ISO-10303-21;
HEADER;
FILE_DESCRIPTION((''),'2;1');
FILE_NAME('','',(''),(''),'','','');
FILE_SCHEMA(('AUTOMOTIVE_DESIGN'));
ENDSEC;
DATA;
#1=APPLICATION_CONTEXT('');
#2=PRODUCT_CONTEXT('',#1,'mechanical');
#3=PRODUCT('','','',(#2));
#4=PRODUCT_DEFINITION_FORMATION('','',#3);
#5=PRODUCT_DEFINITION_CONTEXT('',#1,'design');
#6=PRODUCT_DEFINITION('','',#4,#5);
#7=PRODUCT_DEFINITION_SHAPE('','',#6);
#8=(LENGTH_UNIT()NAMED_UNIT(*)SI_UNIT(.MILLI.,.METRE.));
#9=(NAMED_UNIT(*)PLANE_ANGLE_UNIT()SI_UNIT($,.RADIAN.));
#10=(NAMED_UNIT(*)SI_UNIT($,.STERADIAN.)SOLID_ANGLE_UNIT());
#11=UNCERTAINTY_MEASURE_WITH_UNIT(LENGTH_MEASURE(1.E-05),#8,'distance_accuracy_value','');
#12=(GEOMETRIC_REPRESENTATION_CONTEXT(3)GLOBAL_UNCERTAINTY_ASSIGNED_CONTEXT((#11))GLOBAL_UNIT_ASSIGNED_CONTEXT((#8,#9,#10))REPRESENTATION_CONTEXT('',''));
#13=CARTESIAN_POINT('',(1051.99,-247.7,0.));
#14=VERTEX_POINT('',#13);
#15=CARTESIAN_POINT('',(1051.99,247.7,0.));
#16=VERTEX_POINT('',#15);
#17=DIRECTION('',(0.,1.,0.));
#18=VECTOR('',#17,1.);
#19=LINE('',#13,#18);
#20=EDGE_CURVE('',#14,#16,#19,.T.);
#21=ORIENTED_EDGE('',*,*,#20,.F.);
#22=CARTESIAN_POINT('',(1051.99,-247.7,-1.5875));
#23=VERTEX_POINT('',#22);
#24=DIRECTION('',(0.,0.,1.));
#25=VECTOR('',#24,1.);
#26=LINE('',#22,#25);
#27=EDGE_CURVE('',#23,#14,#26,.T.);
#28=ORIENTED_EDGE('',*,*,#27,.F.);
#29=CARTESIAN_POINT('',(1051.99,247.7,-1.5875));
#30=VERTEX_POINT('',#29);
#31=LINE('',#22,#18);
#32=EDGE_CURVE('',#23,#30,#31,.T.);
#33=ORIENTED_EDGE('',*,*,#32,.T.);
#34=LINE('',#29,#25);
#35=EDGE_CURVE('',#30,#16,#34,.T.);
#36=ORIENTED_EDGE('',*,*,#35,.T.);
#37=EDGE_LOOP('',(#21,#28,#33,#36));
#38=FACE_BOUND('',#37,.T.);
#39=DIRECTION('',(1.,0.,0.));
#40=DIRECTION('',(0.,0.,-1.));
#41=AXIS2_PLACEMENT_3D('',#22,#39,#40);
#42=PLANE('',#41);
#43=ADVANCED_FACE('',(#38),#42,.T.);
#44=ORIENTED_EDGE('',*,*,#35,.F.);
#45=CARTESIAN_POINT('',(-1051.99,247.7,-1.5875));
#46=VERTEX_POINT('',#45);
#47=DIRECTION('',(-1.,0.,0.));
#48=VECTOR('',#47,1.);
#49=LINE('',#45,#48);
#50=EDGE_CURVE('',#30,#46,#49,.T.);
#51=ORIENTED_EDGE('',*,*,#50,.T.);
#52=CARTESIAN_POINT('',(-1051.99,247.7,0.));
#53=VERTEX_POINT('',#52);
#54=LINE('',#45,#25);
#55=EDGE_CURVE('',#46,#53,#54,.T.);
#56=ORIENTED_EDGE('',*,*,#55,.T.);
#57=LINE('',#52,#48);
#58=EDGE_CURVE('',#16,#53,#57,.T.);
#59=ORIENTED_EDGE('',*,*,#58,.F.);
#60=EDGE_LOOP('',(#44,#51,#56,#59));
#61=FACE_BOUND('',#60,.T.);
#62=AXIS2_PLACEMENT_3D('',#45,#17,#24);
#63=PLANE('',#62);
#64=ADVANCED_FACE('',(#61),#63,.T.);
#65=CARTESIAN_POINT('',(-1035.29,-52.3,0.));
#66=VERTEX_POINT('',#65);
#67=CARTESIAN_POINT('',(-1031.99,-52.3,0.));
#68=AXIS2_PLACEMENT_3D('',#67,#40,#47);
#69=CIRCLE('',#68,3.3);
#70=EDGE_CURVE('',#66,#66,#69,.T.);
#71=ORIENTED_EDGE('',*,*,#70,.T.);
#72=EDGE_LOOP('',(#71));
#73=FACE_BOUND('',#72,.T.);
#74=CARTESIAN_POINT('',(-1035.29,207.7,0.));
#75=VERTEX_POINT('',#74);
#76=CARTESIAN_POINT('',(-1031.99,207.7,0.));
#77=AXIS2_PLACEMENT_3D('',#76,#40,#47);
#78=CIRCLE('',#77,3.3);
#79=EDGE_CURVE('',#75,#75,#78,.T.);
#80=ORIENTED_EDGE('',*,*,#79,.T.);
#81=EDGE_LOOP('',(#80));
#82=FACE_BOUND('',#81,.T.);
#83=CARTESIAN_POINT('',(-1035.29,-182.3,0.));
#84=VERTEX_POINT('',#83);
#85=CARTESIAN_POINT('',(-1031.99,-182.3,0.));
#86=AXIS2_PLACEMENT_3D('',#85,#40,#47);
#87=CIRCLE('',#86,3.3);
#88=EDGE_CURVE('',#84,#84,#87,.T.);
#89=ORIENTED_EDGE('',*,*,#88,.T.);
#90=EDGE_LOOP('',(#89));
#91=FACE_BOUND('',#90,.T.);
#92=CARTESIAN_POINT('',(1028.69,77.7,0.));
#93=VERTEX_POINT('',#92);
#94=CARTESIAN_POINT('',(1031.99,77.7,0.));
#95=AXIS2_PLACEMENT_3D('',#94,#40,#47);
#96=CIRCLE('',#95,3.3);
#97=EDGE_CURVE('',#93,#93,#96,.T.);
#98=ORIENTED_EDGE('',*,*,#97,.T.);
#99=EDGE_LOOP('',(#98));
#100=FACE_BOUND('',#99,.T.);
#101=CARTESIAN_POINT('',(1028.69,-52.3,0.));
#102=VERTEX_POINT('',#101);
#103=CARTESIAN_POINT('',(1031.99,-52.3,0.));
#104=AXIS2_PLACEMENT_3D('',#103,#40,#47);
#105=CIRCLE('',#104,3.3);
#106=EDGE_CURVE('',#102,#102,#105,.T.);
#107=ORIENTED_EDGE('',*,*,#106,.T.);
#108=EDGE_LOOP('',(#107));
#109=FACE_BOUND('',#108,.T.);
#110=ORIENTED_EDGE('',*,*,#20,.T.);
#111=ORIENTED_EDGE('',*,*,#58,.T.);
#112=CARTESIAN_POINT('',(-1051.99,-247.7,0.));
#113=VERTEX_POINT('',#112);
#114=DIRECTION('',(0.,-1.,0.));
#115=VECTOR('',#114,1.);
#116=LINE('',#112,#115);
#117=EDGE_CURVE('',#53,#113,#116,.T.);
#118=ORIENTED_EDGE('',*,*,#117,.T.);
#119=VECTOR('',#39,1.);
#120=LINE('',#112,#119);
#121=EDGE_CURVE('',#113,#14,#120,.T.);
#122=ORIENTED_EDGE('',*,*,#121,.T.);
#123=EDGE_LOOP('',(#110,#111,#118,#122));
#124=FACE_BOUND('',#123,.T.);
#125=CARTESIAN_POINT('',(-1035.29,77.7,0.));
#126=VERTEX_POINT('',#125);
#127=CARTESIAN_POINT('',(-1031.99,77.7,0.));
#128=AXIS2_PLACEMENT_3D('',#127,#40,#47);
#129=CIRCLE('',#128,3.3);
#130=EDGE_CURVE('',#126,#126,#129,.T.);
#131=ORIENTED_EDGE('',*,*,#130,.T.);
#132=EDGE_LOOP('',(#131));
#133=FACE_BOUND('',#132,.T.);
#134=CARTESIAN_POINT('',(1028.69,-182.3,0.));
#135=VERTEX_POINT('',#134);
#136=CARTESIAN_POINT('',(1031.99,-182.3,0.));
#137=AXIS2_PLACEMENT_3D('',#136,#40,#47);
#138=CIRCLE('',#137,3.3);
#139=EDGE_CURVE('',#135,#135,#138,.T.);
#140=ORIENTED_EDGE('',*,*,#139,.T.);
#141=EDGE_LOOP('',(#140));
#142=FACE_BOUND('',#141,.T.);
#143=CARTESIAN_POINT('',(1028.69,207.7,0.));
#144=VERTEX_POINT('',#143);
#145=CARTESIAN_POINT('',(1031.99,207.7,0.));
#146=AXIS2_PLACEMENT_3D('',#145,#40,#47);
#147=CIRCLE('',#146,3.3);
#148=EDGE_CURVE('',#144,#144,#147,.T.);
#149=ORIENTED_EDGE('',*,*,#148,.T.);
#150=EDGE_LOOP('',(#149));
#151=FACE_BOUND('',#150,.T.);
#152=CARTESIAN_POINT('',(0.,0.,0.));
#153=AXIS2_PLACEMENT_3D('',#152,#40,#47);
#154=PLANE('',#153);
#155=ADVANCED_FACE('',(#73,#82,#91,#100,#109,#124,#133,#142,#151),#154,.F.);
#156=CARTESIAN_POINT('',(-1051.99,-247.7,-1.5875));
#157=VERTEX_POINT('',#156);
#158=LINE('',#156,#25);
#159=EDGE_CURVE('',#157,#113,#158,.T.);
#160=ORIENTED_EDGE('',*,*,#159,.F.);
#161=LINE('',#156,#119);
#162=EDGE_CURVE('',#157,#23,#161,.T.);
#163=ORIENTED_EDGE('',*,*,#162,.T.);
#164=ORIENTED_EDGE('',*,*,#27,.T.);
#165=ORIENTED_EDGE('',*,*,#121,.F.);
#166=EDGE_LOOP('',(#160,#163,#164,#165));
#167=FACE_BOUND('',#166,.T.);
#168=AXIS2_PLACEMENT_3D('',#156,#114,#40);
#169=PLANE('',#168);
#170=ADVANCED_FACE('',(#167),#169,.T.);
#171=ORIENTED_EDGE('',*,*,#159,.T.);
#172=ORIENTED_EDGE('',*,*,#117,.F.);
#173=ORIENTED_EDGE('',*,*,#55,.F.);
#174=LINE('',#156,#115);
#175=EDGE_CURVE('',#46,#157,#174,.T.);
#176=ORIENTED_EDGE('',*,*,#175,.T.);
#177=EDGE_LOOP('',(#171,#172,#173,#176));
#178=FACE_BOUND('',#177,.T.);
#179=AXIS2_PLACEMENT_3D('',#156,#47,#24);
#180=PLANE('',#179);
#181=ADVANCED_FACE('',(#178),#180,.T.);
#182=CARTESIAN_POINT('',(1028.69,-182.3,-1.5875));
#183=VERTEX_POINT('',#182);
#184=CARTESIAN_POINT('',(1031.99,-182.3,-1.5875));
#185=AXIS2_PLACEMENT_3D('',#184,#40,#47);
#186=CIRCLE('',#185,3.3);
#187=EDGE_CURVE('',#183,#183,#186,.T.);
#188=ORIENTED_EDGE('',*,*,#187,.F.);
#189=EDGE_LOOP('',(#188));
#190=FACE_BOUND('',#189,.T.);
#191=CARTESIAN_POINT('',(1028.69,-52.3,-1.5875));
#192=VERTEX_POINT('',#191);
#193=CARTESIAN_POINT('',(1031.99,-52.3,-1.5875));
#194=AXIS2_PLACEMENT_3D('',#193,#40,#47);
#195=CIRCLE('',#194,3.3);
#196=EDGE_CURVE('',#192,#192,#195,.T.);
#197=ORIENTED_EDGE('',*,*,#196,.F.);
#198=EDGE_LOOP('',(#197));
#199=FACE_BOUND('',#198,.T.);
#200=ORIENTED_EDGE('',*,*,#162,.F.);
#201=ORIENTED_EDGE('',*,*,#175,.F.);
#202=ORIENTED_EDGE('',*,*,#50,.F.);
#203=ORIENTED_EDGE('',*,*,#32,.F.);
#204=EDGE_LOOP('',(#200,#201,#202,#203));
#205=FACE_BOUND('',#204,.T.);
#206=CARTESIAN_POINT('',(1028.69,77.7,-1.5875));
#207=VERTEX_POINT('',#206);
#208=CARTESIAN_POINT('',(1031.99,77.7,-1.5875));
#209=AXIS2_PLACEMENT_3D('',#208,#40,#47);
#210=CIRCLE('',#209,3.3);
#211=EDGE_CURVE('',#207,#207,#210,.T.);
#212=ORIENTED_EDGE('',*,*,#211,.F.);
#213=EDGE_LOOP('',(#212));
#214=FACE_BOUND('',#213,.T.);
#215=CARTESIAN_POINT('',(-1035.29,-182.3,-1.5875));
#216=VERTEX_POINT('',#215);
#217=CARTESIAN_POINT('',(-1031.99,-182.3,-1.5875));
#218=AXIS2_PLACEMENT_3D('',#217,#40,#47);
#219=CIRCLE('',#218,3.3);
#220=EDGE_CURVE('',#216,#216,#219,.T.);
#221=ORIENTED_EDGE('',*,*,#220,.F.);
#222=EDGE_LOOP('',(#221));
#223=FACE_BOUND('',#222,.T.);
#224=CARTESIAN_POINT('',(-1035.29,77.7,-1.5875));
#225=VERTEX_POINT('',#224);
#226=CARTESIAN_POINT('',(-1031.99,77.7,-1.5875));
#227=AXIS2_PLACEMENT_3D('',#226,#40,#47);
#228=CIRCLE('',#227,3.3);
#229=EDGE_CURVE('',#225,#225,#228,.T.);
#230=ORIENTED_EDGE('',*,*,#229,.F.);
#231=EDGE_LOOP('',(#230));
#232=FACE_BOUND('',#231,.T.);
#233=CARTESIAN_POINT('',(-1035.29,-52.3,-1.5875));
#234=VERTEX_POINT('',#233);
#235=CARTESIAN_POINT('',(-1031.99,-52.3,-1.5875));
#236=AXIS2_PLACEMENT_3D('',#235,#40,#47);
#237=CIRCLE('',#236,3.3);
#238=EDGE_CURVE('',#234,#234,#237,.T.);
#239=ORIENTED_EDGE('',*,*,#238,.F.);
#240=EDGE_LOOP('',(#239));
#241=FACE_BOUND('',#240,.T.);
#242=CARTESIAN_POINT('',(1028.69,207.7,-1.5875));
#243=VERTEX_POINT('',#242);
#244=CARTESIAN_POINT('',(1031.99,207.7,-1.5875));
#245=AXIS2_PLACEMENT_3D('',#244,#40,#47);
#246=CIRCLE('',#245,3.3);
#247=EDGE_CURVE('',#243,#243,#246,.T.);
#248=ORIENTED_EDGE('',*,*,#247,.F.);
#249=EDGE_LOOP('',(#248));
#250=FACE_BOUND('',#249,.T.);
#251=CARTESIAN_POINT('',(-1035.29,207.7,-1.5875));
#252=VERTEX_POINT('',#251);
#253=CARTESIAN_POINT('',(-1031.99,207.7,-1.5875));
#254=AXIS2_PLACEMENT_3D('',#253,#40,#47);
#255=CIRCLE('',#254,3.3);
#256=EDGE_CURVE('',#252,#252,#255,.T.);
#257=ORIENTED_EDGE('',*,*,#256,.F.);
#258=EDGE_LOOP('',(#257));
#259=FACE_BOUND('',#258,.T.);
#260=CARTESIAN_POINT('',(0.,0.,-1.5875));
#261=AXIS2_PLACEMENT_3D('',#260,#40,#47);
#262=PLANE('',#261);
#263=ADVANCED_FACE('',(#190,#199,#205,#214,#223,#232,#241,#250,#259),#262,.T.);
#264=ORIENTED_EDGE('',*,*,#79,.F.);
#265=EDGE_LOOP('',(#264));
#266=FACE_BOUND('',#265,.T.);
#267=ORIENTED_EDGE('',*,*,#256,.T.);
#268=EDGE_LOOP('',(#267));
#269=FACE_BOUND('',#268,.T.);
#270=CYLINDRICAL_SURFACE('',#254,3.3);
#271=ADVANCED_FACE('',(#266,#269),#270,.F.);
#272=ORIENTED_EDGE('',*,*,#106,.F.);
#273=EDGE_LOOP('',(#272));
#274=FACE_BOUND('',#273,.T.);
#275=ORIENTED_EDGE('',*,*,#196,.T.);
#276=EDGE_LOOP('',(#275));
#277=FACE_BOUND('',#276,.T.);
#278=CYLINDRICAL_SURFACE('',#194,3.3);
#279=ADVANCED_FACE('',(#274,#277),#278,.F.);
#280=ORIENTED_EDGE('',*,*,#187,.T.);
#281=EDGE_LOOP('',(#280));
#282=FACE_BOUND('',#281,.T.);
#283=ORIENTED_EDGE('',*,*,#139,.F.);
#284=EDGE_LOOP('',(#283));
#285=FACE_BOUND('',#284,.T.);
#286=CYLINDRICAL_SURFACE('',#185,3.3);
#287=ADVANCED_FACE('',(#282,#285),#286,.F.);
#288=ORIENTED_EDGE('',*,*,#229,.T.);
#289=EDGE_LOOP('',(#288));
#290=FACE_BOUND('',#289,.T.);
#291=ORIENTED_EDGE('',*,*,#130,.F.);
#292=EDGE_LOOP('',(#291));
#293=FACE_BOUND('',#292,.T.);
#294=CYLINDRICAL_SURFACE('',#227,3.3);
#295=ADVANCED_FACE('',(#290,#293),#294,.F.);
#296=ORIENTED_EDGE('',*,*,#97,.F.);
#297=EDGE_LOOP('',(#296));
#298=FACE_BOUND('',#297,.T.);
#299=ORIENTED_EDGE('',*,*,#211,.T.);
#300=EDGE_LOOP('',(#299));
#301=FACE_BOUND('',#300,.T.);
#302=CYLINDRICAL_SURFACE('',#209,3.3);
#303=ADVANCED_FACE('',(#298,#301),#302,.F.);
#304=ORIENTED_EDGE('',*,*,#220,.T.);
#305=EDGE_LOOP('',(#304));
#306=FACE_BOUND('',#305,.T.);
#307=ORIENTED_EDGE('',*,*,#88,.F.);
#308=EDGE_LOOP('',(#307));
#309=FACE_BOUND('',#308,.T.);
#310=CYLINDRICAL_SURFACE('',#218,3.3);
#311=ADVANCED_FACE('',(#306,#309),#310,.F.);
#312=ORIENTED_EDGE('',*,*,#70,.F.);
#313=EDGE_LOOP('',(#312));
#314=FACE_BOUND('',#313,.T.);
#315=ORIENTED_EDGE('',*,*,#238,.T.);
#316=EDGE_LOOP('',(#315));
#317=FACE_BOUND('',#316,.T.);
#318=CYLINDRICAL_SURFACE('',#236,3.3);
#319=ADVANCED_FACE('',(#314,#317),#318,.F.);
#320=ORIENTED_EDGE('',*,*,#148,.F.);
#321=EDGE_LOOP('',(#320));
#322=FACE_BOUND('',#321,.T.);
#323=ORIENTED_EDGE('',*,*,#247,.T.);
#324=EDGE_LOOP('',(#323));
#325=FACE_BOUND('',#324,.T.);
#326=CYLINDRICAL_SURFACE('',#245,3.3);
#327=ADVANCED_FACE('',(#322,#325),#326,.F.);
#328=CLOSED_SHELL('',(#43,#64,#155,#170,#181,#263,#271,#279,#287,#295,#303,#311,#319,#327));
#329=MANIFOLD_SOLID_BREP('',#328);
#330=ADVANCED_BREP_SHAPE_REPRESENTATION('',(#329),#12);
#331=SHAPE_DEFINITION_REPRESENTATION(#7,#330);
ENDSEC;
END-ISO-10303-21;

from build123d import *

# Parameters (mm, degrees)
CROQUIS1_W                   = 2103.98
CROQUIS1_H                   = 495.4
BRIDA_BASE1_DEPTH            = 1.5875
TALADRO_DE_MARGEN_PARA_M61_D = 6.6


# Sheet-metal steps are written as plain solids
with BuildPart() as part:
    # Croquis1 → Brida base1 (new body)
    with BuildSketch(Plane.XY):
        Rectangle(CROQUIS1_W, CROQUIS1_H)
    extrude(amount=-BRIDA_BASE1_DEPTH)

    # Taladro de margen para M61 (through all)
    with Locations(Plane(origin=(0, 0, -1.5875), x_dir=(-1, 0, 0), z_dir=(0, 0, -1))):
        with Locations((-1031.99, 207.7), (-1031.99, 77.7), (-1031.99, -52.3), (-1031.99, -182.3), (1031.99, -182.3), (1031.99, -52.3), (1031.99, 77.7), (1031.99, 207.7)):
            Hole(TALADRO_DE_MARGEN_PARA_M61_D / 2)


solid = part.part
